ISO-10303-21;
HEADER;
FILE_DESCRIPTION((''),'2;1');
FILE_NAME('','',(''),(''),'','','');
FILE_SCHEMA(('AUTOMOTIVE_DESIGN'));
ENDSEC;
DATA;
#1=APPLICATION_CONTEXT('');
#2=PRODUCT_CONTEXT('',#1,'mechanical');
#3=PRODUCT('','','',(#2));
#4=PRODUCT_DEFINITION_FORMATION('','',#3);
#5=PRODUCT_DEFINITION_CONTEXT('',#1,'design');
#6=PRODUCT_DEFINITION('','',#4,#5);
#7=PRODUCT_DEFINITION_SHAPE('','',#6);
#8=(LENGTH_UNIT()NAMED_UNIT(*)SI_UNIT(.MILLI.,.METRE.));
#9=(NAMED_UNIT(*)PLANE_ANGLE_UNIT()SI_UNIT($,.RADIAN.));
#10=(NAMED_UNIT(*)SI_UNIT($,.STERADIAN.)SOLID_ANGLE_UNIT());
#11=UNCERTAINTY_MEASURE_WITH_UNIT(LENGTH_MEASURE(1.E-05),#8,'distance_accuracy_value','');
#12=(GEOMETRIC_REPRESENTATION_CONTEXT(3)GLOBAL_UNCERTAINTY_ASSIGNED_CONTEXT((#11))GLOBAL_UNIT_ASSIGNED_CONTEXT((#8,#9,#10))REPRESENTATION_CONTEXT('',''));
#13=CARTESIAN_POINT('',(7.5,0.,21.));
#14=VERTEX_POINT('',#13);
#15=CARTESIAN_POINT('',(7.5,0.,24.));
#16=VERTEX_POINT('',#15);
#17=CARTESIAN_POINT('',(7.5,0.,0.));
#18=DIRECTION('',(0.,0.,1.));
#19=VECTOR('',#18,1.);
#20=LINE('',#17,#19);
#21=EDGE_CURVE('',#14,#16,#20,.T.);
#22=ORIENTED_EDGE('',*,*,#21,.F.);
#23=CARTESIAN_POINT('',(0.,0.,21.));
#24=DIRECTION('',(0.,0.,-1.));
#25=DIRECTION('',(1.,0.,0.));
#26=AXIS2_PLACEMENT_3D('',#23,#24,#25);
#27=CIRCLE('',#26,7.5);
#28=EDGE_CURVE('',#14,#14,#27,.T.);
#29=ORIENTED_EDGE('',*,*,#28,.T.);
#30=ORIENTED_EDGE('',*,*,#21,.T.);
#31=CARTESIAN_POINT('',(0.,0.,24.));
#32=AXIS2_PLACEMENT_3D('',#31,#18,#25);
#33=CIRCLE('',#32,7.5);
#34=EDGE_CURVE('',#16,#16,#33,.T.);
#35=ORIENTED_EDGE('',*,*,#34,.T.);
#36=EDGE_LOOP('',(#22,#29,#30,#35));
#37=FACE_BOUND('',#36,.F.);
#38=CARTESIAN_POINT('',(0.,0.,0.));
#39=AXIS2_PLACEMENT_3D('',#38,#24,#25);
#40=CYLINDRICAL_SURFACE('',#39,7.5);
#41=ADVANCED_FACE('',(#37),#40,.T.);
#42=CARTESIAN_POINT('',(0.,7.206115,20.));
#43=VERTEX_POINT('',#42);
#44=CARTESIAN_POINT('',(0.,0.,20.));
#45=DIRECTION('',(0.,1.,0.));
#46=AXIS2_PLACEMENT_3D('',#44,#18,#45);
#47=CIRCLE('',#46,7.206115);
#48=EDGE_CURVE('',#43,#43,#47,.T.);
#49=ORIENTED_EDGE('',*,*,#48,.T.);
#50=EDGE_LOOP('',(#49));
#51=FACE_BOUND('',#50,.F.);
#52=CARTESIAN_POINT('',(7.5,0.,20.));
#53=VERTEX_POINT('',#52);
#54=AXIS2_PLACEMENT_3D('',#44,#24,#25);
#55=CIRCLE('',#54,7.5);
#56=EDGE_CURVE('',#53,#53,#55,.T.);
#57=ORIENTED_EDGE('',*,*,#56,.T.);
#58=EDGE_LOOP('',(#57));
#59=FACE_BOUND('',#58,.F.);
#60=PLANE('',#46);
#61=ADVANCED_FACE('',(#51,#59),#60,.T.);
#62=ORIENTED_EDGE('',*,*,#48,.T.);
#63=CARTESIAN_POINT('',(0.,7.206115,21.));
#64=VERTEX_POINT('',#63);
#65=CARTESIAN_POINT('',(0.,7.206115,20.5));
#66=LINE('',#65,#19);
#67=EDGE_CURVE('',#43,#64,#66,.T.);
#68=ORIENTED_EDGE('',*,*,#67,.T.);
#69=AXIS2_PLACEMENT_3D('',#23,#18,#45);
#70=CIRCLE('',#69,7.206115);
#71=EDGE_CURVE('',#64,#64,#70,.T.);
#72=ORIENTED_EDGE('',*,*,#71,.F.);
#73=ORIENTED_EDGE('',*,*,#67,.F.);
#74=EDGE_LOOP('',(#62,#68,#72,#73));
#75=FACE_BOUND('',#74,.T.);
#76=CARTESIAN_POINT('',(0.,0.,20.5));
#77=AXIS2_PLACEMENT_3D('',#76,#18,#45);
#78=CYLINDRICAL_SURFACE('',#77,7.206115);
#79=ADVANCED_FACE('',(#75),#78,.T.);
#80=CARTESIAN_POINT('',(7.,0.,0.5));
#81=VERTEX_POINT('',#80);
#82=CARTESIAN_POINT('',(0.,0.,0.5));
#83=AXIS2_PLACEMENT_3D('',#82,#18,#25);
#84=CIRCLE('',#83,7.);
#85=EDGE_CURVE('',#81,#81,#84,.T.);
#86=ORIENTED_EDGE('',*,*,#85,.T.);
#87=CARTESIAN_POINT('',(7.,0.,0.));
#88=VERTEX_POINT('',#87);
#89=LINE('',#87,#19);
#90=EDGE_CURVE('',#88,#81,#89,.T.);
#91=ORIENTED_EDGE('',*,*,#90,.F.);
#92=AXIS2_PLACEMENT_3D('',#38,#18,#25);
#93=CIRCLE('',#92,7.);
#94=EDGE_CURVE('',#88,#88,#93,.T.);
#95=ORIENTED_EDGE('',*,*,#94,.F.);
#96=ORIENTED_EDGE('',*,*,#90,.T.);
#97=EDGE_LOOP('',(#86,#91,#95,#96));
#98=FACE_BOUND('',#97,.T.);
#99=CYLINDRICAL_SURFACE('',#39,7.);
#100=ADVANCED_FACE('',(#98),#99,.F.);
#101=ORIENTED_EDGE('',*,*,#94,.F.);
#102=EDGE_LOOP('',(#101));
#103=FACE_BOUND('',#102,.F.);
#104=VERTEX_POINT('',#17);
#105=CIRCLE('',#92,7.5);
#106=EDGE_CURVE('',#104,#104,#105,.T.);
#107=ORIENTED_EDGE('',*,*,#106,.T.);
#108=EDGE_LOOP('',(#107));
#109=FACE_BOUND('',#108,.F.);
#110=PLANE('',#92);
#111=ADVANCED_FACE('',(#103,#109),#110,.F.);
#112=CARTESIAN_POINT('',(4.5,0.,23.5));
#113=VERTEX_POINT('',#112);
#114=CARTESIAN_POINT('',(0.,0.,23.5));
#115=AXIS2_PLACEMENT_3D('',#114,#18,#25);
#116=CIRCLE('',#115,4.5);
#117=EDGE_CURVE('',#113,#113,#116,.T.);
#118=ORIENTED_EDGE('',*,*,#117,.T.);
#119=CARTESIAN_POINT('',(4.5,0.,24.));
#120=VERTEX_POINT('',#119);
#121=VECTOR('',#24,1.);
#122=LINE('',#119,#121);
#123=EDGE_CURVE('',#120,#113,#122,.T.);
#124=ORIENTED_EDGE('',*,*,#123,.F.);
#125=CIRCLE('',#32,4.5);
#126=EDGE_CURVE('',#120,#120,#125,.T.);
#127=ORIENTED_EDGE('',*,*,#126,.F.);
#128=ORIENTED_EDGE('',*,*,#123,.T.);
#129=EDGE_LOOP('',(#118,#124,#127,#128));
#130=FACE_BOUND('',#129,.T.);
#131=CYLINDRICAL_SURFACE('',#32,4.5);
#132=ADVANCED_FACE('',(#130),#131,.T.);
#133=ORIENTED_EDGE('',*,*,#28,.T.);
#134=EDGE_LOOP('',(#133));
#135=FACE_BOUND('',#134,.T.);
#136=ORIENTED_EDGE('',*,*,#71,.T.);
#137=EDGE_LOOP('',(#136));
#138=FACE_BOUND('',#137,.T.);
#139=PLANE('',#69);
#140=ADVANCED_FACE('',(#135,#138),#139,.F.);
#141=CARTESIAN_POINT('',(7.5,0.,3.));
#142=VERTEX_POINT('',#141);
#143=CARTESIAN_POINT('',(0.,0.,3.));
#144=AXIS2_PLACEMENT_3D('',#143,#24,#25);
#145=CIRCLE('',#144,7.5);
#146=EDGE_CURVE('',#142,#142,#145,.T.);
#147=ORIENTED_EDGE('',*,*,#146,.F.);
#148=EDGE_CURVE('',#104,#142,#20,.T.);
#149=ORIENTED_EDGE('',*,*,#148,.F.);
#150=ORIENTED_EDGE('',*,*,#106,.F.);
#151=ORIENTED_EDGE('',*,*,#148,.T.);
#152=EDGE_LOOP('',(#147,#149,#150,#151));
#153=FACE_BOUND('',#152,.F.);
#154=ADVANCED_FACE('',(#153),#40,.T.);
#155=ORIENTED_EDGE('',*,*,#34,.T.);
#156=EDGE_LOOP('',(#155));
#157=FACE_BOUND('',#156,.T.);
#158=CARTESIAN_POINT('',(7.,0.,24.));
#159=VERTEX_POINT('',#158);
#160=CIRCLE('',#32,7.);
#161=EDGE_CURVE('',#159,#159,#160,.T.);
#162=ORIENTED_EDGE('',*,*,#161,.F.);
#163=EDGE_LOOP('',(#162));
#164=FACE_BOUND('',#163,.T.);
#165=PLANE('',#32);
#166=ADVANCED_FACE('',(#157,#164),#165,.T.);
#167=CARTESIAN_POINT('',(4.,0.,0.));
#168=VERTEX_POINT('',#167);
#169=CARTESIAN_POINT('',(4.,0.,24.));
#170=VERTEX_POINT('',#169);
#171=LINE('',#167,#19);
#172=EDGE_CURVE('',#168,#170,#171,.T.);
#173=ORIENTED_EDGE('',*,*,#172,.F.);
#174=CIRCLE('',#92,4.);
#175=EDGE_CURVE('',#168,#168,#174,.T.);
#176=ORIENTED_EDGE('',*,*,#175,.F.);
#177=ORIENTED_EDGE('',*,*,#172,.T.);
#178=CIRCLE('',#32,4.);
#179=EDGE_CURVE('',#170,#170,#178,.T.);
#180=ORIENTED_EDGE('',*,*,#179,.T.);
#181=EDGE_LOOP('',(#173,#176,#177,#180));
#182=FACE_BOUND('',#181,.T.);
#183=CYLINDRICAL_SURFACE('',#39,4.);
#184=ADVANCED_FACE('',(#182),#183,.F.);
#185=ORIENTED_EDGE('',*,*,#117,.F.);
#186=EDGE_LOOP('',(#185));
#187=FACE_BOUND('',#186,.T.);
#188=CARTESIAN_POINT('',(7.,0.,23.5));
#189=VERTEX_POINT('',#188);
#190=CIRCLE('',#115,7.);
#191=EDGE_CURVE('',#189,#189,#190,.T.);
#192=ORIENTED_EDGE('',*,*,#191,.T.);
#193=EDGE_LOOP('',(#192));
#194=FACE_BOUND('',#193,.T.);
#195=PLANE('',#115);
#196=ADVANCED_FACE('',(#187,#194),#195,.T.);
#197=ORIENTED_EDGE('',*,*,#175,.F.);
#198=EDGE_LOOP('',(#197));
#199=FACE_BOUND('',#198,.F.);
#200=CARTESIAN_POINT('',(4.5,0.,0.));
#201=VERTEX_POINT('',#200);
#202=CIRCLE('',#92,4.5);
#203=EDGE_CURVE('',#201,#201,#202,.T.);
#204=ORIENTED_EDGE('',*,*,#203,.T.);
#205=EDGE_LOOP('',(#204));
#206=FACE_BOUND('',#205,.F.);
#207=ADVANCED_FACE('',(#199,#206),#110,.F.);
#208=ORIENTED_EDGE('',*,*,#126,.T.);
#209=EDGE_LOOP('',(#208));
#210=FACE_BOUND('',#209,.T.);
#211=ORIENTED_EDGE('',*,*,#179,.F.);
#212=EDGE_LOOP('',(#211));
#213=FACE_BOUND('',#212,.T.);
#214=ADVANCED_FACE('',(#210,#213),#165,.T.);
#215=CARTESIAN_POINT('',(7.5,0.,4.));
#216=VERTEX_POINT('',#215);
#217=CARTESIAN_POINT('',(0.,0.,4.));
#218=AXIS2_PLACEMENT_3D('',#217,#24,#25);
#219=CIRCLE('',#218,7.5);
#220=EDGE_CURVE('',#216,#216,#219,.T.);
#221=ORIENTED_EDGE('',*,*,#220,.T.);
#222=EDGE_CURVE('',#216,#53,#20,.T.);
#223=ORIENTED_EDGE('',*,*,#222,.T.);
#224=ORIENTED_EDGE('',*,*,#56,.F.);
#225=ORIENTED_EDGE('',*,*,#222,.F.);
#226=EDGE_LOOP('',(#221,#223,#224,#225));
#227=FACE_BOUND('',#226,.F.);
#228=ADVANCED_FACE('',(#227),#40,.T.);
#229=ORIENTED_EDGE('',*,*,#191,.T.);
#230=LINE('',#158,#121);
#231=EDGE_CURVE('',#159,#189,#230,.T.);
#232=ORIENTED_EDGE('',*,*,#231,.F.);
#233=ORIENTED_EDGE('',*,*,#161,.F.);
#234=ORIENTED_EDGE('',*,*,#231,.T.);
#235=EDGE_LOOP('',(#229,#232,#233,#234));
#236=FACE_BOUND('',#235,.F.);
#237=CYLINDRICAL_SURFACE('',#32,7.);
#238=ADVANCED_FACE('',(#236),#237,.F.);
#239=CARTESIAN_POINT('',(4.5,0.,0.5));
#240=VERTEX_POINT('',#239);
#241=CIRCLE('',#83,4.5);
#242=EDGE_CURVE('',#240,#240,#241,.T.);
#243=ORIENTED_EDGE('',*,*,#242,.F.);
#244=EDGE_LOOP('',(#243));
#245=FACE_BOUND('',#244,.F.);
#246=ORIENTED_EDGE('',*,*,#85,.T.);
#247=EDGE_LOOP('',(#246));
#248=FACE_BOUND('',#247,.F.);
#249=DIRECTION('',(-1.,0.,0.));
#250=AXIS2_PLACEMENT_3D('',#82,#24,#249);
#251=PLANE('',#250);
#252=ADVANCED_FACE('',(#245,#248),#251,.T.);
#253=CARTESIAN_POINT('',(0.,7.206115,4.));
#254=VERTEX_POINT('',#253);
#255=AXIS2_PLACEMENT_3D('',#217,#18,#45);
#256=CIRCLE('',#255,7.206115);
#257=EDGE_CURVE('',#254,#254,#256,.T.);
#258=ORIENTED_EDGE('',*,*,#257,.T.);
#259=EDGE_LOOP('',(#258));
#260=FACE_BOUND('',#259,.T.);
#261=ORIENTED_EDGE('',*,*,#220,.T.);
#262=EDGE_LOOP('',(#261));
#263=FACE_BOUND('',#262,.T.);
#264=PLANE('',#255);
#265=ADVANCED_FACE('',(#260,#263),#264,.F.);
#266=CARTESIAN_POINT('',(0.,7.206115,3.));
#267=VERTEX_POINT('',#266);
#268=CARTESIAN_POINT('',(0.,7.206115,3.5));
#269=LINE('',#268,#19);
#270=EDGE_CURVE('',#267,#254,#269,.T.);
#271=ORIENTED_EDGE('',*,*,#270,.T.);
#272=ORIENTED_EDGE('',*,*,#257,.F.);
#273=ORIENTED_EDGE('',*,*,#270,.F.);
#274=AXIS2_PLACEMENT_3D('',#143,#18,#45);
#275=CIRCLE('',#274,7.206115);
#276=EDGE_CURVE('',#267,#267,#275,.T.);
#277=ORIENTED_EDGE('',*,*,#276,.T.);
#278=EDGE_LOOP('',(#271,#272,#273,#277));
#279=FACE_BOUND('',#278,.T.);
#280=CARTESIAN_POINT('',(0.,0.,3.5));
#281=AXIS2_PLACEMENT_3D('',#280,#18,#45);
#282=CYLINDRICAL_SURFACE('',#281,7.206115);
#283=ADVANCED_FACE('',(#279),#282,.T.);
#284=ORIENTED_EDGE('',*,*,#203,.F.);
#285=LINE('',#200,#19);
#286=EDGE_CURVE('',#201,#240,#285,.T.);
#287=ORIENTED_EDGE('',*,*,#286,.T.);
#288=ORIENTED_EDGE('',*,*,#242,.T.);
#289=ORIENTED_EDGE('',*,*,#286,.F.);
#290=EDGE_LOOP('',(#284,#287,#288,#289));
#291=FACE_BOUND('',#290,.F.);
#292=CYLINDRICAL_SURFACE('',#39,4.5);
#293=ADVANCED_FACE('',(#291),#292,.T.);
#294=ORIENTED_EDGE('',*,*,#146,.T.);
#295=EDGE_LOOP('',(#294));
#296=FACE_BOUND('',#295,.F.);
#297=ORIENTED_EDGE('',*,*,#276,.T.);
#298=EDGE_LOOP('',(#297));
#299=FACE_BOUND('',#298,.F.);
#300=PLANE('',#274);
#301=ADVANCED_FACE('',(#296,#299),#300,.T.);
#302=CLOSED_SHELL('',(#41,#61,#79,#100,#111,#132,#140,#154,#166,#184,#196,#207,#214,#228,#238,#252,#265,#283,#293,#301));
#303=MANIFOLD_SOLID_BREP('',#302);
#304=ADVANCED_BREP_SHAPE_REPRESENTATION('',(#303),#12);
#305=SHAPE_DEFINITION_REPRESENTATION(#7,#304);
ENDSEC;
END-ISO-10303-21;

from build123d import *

# Parameters (mm, degrees)
F0_R     = 7.5
F0_R_2   = 4
F1_DEPTH = 24
F2_W     = 2.5912171826
F2_H     = 1
F4_R     = 7
F4_R_2   = 4.5
F5_DEPTH = 0.5


# Not quite as in the source:
# - a pattern or mirror of a feature is missing from the dataset's text; its kind, count and spacing are read off the source's solid


with BuildPart() as f1:
    # F0 (on Top) → F1 (new body)
    with BuildSketch(Plane.XY):
        Circle(F0_R)
        Circle(F0_R_2, mode=Mode.SUBTRACT)
    extrude(amount=F1_DEPTH)

    # F2 (on Right) → F3 (revolve, cut)
    with BuildSketch(Plane.YZ):
        with Locations((8.5017232858, 20.5)):
            Rectangle(F2_W, F2_H)
        with Locations((8.5017232858, 3.5)):
            Rectangle(F2_W, F2_H)
    revolve(axis=Axis((0, 0, 24), (0, 0, 1)), mode=Mode.SUBTRACT)

    # F4 (on face) → F5 (cut)
    with BuildSketch(Plane.XY.offset(24)):
        Circle(F4_R)
        Circle(F4_R_2, mode=Mode.SUBTRACT)
    f5 = extrude(amount=-F5_DEPTH, mode=Mode.SUBTRACT)

    # F5_copies: F5 across plane
    add(f5.mirror(Plane(origin=(0, 0, 12), x_dir=(-1, 0, 0), z_dir=(0, 0, -1))), mode=Mode.SUBTRACT)


solid = f1.part
